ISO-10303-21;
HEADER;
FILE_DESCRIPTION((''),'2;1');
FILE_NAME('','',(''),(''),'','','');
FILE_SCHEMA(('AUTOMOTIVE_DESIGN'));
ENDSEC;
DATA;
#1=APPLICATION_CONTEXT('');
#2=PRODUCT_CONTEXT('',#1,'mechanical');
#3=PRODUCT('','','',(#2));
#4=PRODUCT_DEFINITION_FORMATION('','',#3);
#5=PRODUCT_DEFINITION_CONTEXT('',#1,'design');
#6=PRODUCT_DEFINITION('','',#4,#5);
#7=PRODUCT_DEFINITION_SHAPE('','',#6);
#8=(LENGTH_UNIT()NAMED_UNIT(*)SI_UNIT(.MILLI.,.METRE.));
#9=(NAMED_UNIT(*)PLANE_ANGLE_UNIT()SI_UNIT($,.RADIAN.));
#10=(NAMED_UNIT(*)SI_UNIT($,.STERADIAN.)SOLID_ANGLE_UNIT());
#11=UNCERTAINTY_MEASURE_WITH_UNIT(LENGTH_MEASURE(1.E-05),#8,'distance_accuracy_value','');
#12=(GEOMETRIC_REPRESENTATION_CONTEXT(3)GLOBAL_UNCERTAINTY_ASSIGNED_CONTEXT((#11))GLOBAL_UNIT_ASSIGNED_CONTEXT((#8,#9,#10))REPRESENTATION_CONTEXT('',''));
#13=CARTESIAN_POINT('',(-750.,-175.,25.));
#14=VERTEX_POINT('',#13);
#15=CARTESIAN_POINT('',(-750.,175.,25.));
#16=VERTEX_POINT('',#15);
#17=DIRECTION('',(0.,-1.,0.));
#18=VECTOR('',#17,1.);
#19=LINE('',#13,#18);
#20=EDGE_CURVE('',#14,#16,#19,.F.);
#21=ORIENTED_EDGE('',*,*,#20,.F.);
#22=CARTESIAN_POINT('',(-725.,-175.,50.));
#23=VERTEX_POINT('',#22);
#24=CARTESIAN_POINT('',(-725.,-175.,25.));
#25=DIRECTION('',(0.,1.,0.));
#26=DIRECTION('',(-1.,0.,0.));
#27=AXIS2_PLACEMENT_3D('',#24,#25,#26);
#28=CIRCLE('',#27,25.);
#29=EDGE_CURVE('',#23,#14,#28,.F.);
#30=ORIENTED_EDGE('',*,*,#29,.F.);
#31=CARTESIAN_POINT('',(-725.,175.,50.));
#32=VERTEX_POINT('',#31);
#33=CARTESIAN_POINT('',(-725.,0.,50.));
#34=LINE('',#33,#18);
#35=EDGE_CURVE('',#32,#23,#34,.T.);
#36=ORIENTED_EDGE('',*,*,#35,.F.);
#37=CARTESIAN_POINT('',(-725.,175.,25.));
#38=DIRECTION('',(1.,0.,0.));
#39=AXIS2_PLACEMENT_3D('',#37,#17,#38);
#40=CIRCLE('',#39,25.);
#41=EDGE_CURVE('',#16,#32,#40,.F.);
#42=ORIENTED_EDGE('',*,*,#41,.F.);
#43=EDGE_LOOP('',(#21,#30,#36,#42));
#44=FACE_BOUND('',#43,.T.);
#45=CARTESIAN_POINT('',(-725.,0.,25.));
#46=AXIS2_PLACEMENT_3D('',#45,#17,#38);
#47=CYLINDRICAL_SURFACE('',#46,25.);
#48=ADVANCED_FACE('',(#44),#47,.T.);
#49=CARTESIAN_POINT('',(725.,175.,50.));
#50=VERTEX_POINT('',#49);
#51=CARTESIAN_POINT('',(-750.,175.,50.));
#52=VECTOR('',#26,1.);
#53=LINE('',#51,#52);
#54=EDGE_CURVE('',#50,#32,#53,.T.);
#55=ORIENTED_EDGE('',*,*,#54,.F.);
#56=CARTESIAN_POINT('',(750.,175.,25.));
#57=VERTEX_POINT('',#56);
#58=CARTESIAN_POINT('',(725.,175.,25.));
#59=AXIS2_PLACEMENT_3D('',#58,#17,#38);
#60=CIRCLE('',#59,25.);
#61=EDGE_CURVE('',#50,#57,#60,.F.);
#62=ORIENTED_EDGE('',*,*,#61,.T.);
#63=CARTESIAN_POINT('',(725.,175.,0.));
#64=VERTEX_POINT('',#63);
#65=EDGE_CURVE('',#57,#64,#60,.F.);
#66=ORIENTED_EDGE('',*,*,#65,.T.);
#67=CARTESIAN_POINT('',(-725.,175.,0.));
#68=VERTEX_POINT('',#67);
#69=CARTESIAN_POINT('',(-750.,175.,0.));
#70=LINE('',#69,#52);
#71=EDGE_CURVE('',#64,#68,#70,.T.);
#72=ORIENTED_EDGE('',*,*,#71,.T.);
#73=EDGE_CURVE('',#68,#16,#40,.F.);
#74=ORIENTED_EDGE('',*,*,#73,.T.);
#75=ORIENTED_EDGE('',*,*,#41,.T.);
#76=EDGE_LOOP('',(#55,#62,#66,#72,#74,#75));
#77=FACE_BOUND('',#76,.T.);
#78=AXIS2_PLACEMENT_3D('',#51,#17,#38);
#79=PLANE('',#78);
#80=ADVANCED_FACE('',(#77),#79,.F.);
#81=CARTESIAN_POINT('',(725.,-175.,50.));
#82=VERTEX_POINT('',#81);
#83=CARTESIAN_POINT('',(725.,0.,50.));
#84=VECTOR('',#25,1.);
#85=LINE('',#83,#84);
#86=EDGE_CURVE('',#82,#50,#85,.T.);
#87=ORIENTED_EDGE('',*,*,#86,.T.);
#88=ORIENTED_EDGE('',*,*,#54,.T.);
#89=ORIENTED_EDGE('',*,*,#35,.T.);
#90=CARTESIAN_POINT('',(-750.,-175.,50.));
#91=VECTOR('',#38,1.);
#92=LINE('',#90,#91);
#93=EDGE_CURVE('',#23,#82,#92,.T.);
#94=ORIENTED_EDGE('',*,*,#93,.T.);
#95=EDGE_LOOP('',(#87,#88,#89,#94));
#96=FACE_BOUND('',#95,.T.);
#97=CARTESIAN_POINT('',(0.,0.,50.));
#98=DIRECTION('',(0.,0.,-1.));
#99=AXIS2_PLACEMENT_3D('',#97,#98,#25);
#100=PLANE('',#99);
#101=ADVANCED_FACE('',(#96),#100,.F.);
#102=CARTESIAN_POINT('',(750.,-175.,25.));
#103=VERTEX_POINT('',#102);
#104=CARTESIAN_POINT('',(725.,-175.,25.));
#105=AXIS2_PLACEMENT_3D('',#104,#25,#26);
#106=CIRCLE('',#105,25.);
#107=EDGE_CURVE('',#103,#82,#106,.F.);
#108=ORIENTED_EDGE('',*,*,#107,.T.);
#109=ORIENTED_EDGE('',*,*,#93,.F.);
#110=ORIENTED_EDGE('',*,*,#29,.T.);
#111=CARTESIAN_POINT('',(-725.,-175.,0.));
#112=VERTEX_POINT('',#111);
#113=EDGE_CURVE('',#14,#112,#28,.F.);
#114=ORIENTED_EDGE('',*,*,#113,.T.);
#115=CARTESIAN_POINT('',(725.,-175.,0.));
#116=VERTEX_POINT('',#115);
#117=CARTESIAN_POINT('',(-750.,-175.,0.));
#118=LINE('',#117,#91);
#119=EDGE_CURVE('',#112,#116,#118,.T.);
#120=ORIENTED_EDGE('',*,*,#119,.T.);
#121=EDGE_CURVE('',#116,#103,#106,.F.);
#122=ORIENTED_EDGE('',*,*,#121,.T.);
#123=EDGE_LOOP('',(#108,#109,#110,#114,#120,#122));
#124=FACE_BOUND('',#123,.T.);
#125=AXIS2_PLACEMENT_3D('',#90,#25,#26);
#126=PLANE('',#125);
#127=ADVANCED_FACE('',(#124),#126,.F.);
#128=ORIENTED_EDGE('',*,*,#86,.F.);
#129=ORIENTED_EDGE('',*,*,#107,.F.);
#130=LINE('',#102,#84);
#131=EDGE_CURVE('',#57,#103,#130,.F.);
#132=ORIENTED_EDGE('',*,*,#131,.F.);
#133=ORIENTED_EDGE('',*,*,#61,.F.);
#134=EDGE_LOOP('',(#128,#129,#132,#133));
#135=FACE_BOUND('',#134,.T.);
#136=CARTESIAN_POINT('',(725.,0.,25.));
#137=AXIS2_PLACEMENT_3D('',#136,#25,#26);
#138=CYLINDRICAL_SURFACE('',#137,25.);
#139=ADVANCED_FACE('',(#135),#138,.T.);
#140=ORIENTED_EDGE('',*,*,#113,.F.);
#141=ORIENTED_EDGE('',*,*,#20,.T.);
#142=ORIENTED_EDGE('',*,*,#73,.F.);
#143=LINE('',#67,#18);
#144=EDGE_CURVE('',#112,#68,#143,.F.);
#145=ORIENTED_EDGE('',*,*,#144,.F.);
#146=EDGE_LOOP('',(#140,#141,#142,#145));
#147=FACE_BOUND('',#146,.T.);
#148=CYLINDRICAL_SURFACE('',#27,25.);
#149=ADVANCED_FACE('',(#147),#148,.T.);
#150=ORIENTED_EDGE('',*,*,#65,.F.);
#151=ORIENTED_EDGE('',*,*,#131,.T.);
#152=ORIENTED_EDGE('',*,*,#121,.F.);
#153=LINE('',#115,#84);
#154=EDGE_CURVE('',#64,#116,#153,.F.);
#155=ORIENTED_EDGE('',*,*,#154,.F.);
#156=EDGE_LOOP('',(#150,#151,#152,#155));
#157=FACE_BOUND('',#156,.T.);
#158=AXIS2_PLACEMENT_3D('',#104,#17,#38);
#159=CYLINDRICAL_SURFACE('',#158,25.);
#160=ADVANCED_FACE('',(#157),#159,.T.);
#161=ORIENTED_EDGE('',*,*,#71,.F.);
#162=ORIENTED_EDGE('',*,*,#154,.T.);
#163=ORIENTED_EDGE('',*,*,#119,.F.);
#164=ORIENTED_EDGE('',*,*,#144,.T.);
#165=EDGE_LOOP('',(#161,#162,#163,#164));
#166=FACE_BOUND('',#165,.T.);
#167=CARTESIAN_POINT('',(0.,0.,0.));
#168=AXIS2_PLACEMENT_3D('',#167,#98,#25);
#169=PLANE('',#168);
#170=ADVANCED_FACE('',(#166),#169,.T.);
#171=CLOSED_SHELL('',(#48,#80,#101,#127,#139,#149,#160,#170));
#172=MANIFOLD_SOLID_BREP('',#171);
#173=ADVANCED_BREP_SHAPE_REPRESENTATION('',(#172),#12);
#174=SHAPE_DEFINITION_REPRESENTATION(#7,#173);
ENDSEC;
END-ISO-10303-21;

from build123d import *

# Parameters (mm, degrees)
SKETCH1_W             = 1500
SKETCH1_H             = 350
BOSS_EXTRUDE1_DEPTH   = 50
FILLET1_R             = 25
BODY_MOVE_COPY1_ANGLE = 90


with BuildPart() as part:
    # Sketch1 → Boss-Extrude1 (new body)
    with BuildSketch(Plane(origin=(0, 0, 0), x_dir=(1, 0, 0), z_dir=(0, 1, 0))):
        Rectangle(SKETCH1_W, SKETCH1_H)
    extrude(amount=BOSS_EXTRUDE1_DEPTH)

    # Fillet1
    fillet1_edges = [part.edges().sort_by_distance(p)[0] for p in [
        (750, 0, 0),
        (750, 50, 0),
        (-750, 0, 0),
        (-750, 50, 0),
    ]]
    fillet(fillet1_edges, radius=FILLET1_R - 0.0001)  # a hair under: the kernel refuses the full size


with BuildPart() as part_1:
    # Body-Move/Copy1: moved
    add(part.part.rotate(Axis((0, 0, 0), (1, 0, 0)), BODY_MOVE_COPY1_ANGLE))


solid = part_1.part
